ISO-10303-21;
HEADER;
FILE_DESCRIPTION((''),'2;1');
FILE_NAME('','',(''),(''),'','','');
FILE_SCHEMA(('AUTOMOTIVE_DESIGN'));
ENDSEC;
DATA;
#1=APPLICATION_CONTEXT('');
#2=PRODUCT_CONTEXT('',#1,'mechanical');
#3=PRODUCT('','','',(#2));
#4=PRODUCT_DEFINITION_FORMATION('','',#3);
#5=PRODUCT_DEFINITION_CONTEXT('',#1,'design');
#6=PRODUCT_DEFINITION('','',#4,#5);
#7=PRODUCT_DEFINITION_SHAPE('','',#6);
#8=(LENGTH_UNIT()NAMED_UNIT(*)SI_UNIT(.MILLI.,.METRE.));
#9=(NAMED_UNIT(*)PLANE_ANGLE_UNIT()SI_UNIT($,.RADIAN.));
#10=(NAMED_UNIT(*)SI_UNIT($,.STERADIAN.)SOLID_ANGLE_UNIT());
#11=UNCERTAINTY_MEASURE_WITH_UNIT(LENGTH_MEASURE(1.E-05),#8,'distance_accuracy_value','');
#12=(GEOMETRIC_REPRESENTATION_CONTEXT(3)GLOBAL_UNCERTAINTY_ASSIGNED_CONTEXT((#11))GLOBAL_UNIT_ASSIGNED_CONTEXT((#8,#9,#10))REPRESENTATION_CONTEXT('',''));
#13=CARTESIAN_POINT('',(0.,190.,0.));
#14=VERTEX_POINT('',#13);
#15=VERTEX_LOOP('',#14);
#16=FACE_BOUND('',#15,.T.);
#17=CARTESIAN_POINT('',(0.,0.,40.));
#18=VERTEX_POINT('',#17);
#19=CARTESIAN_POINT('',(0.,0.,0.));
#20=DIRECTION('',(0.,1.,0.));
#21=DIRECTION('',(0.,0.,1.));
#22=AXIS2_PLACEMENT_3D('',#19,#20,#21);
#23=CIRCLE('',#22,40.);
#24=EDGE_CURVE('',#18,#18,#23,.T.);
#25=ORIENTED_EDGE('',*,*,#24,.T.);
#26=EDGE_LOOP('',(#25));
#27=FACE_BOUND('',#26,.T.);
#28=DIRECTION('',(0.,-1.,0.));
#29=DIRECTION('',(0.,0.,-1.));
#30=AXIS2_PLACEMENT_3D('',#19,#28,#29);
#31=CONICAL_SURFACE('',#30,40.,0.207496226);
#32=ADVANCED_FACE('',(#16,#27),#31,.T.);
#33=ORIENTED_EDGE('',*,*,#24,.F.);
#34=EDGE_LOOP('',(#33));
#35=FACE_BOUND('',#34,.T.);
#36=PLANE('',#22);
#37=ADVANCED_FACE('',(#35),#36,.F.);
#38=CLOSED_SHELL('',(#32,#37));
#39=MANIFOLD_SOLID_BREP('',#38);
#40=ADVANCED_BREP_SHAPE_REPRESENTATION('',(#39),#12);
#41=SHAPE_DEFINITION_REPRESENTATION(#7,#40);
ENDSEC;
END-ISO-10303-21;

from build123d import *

# Parameters (mm, degrees)
SKETCH_1_R       = 40
EXTRUDE_2_DEPTH  = 190
CHAMFER_1_SIZE   = 190
CHAMFER_1_SIZE_2 = 40


with BuildPart() as part:
    # Эскиз1 → Вытянуть2 (new body)
    with BuildSketch(Plane(origin=(0, 0, 0), x_dir=(1, 0, 0), z_dir=(0, 1, 0))):
        with Locations(Location((0, 0, 0), (0, 0, 270))):
            Circle(SKETCH_1_R)
    extrude(amount=EXTRUDE_2_DEPTH)

    # Фаска1
    # the kernel refuses this chamfer: 190, 40 mm, written as the material it takes off along each edge
    with BuildSketch(Plane(origin=(0, 190, 0), x_dir=(0, 0, 1), z_dir=(-1, 0, 0))) as chamfer_1_piece_1:
        Polygon((40, -CHAMFER_1_SIZE), (40 - CHAMFER_1_SIZE_2, 0), (40, 0), align=None)
    revolve(axis=Axis((0, 190, 0), (0, 1, 0)), mode=Mode.SUBTRACT)


solid = part.part
